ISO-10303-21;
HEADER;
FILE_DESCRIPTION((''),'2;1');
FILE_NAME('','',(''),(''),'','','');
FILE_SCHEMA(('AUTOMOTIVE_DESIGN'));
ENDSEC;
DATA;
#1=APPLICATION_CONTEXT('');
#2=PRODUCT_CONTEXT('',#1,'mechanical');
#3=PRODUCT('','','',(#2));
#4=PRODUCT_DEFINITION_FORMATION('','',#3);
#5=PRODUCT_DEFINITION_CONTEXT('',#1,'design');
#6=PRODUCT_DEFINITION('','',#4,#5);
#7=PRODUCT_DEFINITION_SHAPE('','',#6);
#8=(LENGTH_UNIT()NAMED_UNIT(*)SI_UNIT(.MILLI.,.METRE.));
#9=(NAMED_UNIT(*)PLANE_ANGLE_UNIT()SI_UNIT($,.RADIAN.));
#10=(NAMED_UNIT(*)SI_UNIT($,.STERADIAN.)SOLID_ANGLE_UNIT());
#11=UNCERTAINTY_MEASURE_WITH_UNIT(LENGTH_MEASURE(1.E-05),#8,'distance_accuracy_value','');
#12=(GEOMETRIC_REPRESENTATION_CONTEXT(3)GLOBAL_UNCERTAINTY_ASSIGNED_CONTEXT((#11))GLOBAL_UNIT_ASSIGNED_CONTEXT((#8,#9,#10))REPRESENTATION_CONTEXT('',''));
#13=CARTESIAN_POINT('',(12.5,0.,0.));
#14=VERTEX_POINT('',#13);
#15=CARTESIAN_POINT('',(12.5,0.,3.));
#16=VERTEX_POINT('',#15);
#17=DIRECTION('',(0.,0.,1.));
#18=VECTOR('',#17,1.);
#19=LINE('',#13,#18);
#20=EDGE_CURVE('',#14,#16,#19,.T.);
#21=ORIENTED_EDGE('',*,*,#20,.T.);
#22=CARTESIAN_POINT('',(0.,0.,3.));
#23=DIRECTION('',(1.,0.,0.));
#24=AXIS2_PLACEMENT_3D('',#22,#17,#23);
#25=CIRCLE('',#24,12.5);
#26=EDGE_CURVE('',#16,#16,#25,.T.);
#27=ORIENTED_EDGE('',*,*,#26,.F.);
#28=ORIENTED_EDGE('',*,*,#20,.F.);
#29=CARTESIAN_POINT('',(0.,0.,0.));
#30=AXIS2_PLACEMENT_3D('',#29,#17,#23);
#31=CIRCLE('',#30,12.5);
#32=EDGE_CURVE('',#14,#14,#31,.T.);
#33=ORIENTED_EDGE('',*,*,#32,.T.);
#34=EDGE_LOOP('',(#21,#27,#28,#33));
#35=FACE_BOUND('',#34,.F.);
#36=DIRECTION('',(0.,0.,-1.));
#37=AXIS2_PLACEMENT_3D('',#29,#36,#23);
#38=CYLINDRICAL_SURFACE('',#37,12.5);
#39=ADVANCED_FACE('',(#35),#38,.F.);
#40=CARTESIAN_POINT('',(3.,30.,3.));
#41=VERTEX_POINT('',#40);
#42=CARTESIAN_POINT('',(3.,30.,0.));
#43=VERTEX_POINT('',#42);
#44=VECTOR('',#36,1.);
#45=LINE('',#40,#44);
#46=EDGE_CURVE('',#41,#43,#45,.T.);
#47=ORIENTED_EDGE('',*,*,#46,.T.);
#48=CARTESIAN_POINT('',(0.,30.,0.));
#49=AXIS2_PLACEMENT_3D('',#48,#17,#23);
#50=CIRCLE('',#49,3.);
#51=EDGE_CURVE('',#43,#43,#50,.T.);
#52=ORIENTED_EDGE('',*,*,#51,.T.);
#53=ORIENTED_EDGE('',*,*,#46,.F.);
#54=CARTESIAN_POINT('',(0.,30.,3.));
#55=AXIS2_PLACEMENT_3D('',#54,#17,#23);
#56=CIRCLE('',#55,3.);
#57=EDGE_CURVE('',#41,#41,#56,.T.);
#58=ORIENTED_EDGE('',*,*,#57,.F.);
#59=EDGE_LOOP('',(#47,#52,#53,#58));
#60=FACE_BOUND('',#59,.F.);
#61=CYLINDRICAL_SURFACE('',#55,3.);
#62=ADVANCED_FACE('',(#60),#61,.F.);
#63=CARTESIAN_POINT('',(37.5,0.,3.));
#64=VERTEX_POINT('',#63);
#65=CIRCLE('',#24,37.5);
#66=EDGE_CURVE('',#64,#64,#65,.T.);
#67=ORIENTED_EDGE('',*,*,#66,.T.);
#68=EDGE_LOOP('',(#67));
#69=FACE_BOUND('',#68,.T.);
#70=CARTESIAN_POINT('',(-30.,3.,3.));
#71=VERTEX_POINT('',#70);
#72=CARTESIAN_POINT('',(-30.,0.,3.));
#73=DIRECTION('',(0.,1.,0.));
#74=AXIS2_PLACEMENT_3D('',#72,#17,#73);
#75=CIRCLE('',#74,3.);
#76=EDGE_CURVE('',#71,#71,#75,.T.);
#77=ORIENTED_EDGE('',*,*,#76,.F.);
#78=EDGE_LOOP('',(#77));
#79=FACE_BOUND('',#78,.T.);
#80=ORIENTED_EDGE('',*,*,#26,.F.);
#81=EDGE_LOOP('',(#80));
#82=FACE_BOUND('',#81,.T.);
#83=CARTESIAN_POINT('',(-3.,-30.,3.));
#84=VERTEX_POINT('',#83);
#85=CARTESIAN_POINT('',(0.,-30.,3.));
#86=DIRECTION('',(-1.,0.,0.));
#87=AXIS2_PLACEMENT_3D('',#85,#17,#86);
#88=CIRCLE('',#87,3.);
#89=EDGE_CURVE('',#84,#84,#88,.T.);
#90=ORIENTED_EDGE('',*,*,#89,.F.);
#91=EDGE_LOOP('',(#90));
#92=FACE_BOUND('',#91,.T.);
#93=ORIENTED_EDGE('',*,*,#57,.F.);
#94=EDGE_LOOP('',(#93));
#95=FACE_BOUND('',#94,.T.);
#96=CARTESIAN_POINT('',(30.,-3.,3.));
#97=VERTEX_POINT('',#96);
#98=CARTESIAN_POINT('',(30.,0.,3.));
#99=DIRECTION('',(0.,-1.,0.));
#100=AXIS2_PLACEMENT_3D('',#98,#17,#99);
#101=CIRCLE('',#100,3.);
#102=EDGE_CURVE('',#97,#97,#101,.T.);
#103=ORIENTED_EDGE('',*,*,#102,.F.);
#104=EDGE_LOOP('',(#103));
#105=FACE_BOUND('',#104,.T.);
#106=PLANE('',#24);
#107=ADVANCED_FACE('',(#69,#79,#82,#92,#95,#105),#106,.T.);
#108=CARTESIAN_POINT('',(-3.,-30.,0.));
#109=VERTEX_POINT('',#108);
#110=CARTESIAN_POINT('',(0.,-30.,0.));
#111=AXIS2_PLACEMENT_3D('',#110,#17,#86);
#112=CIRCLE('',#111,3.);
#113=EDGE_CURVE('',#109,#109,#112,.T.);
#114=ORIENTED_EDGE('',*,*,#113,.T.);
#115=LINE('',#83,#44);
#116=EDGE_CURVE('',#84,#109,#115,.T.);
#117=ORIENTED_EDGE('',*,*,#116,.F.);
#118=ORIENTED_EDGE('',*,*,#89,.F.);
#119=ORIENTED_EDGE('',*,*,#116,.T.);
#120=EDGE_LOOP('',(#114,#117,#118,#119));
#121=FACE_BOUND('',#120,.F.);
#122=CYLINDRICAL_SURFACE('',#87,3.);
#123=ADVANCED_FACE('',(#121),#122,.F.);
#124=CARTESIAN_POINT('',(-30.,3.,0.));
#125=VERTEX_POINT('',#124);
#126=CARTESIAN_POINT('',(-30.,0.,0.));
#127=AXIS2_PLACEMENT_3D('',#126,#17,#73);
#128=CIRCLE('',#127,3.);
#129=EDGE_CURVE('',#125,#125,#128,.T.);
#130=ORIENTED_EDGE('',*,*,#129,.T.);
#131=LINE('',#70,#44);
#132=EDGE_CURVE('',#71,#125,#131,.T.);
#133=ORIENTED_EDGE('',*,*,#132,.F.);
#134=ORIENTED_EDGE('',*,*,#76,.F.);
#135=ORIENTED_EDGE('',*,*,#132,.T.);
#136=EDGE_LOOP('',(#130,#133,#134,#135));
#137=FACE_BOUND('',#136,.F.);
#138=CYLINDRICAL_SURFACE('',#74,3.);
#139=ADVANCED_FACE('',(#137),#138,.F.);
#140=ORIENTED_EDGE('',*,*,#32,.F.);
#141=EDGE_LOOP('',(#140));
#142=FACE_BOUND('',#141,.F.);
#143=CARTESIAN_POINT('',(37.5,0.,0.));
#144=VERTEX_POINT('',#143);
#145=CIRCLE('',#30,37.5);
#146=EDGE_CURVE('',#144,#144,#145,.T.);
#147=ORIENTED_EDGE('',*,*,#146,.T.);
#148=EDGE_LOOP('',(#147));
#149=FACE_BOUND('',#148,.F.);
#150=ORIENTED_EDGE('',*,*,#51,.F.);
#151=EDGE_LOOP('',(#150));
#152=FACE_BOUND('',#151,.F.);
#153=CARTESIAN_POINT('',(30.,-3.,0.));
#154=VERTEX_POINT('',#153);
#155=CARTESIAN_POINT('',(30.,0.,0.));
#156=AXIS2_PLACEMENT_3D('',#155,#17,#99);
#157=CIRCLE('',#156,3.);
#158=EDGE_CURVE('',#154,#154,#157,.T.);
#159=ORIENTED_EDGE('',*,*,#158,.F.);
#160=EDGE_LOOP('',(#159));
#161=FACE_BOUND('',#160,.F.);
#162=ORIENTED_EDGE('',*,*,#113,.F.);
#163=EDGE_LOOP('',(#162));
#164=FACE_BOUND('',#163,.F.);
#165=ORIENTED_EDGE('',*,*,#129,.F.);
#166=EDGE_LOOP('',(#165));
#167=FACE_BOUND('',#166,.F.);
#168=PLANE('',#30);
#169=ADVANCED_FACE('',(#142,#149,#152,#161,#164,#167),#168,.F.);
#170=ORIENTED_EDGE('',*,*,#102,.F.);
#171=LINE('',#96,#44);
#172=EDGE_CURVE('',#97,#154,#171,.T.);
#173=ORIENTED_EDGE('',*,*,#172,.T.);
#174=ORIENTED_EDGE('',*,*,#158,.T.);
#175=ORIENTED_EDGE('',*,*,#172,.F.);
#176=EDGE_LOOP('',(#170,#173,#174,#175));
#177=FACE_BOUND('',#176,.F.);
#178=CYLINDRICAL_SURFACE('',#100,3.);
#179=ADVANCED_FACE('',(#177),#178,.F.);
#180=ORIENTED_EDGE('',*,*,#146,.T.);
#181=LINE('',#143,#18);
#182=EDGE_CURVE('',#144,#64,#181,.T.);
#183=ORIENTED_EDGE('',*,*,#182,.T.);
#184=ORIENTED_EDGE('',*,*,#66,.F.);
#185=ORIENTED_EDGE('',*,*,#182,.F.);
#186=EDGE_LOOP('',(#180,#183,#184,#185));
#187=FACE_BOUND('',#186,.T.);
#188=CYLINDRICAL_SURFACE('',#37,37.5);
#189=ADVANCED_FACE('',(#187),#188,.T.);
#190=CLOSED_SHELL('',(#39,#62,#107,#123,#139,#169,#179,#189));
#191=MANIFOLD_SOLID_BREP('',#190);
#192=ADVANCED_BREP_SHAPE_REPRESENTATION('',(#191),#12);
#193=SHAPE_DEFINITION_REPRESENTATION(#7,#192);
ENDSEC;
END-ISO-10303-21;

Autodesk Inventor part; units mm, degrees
ref_plane "YZ Plane" through (0, 0, 0) normal (1, 0, 0) x (0, 1, 0)
ref_plane "XZ Plane" through (0, 0, 0) normal (0, 1, 0) x (-1, 0, 0)
ref_plane "XY Plane" through (0, 0, 0) normal (0, 0, 1) x (1, 0, 0)
sketch "Sketch1" plane through (0, 0, 0) normal (0, 0, 1) x (1, 0, 0)
  circle A0 centre (0, 0) radius 37.5
  circle A1 centre (0, 0) radius 12.5
  dimension "d15" = 25
  dimension "d16" = 75
extrude "Plate1" add sketch "Sketch1" along normal blind 3
sketch "Sketch2" plane through (0, 0, 0) normal (0, 0, -1) x (-1, 0, 0)
  line L0 (-27.3167, 25.2399) -> (172.6833, 25.2399) construction
  line L1 (172.6833, 25.2399) -> (172.6833, 5.2399) construction
  line L2 (172.6833, 5.2399) -> (-27.3167, 5.2399) construction
  line L3 (-27.3167, 5.2399) -> (-27.3167, 25.2399) construction
  point P0 (0, 0)
  point P1 (-251, -525)
  dimension "d6" = 200
  dimension "d9" = 20
mark "Mark1"
sketch "Sketch3" plane through (0, 0, 3) normal (0, 0, 1) x (1, 0, 0)
  circle A0 centre (0, 0) radius 12.5 construction
  circle A1 centre (0, 0) radius 37.5 construction
  circle A2 centre (0, 30) radius 3
  line L0 (0, 37.5) -> (0, 12.5) construction
  circle A3 centre (0, 0) radius 30 construction
  dimension "d26" = 60
  dimension "d17" = 6
  dimension "d19" = 7.5
extrude "Cut1" cut sketch "Sketch3" against normal blind 3
pattern_circular "Circular Pattern1" count 4 over 360 about axis through (0, 0, 0) along (0, 0, 1) of "Cut1"
equation "\"d20\" = Thickness"
equation "\"d2\" = Thickness"
equation "\"BendReliefWidth\" = Thickness"
equation "\"BendReliefDepth\" = 0.5 * Thickness"
equation "\"CornerReliefSize\" = 4 * Thickness"
equation "\"MinimumRemnant\" = 2 * Thickness"
equation "\"TransitionRadius\" = BendRadius"
equation "\"JacobiRadiusSize\" = BendRadius"
equation "\"GapSize\" = Thickness"
equation "\"Thickness\" = 3"
equation "\"BendRadius\" = 5"
properties part number "TRM 029 coupling ring" material "AISI 304"
